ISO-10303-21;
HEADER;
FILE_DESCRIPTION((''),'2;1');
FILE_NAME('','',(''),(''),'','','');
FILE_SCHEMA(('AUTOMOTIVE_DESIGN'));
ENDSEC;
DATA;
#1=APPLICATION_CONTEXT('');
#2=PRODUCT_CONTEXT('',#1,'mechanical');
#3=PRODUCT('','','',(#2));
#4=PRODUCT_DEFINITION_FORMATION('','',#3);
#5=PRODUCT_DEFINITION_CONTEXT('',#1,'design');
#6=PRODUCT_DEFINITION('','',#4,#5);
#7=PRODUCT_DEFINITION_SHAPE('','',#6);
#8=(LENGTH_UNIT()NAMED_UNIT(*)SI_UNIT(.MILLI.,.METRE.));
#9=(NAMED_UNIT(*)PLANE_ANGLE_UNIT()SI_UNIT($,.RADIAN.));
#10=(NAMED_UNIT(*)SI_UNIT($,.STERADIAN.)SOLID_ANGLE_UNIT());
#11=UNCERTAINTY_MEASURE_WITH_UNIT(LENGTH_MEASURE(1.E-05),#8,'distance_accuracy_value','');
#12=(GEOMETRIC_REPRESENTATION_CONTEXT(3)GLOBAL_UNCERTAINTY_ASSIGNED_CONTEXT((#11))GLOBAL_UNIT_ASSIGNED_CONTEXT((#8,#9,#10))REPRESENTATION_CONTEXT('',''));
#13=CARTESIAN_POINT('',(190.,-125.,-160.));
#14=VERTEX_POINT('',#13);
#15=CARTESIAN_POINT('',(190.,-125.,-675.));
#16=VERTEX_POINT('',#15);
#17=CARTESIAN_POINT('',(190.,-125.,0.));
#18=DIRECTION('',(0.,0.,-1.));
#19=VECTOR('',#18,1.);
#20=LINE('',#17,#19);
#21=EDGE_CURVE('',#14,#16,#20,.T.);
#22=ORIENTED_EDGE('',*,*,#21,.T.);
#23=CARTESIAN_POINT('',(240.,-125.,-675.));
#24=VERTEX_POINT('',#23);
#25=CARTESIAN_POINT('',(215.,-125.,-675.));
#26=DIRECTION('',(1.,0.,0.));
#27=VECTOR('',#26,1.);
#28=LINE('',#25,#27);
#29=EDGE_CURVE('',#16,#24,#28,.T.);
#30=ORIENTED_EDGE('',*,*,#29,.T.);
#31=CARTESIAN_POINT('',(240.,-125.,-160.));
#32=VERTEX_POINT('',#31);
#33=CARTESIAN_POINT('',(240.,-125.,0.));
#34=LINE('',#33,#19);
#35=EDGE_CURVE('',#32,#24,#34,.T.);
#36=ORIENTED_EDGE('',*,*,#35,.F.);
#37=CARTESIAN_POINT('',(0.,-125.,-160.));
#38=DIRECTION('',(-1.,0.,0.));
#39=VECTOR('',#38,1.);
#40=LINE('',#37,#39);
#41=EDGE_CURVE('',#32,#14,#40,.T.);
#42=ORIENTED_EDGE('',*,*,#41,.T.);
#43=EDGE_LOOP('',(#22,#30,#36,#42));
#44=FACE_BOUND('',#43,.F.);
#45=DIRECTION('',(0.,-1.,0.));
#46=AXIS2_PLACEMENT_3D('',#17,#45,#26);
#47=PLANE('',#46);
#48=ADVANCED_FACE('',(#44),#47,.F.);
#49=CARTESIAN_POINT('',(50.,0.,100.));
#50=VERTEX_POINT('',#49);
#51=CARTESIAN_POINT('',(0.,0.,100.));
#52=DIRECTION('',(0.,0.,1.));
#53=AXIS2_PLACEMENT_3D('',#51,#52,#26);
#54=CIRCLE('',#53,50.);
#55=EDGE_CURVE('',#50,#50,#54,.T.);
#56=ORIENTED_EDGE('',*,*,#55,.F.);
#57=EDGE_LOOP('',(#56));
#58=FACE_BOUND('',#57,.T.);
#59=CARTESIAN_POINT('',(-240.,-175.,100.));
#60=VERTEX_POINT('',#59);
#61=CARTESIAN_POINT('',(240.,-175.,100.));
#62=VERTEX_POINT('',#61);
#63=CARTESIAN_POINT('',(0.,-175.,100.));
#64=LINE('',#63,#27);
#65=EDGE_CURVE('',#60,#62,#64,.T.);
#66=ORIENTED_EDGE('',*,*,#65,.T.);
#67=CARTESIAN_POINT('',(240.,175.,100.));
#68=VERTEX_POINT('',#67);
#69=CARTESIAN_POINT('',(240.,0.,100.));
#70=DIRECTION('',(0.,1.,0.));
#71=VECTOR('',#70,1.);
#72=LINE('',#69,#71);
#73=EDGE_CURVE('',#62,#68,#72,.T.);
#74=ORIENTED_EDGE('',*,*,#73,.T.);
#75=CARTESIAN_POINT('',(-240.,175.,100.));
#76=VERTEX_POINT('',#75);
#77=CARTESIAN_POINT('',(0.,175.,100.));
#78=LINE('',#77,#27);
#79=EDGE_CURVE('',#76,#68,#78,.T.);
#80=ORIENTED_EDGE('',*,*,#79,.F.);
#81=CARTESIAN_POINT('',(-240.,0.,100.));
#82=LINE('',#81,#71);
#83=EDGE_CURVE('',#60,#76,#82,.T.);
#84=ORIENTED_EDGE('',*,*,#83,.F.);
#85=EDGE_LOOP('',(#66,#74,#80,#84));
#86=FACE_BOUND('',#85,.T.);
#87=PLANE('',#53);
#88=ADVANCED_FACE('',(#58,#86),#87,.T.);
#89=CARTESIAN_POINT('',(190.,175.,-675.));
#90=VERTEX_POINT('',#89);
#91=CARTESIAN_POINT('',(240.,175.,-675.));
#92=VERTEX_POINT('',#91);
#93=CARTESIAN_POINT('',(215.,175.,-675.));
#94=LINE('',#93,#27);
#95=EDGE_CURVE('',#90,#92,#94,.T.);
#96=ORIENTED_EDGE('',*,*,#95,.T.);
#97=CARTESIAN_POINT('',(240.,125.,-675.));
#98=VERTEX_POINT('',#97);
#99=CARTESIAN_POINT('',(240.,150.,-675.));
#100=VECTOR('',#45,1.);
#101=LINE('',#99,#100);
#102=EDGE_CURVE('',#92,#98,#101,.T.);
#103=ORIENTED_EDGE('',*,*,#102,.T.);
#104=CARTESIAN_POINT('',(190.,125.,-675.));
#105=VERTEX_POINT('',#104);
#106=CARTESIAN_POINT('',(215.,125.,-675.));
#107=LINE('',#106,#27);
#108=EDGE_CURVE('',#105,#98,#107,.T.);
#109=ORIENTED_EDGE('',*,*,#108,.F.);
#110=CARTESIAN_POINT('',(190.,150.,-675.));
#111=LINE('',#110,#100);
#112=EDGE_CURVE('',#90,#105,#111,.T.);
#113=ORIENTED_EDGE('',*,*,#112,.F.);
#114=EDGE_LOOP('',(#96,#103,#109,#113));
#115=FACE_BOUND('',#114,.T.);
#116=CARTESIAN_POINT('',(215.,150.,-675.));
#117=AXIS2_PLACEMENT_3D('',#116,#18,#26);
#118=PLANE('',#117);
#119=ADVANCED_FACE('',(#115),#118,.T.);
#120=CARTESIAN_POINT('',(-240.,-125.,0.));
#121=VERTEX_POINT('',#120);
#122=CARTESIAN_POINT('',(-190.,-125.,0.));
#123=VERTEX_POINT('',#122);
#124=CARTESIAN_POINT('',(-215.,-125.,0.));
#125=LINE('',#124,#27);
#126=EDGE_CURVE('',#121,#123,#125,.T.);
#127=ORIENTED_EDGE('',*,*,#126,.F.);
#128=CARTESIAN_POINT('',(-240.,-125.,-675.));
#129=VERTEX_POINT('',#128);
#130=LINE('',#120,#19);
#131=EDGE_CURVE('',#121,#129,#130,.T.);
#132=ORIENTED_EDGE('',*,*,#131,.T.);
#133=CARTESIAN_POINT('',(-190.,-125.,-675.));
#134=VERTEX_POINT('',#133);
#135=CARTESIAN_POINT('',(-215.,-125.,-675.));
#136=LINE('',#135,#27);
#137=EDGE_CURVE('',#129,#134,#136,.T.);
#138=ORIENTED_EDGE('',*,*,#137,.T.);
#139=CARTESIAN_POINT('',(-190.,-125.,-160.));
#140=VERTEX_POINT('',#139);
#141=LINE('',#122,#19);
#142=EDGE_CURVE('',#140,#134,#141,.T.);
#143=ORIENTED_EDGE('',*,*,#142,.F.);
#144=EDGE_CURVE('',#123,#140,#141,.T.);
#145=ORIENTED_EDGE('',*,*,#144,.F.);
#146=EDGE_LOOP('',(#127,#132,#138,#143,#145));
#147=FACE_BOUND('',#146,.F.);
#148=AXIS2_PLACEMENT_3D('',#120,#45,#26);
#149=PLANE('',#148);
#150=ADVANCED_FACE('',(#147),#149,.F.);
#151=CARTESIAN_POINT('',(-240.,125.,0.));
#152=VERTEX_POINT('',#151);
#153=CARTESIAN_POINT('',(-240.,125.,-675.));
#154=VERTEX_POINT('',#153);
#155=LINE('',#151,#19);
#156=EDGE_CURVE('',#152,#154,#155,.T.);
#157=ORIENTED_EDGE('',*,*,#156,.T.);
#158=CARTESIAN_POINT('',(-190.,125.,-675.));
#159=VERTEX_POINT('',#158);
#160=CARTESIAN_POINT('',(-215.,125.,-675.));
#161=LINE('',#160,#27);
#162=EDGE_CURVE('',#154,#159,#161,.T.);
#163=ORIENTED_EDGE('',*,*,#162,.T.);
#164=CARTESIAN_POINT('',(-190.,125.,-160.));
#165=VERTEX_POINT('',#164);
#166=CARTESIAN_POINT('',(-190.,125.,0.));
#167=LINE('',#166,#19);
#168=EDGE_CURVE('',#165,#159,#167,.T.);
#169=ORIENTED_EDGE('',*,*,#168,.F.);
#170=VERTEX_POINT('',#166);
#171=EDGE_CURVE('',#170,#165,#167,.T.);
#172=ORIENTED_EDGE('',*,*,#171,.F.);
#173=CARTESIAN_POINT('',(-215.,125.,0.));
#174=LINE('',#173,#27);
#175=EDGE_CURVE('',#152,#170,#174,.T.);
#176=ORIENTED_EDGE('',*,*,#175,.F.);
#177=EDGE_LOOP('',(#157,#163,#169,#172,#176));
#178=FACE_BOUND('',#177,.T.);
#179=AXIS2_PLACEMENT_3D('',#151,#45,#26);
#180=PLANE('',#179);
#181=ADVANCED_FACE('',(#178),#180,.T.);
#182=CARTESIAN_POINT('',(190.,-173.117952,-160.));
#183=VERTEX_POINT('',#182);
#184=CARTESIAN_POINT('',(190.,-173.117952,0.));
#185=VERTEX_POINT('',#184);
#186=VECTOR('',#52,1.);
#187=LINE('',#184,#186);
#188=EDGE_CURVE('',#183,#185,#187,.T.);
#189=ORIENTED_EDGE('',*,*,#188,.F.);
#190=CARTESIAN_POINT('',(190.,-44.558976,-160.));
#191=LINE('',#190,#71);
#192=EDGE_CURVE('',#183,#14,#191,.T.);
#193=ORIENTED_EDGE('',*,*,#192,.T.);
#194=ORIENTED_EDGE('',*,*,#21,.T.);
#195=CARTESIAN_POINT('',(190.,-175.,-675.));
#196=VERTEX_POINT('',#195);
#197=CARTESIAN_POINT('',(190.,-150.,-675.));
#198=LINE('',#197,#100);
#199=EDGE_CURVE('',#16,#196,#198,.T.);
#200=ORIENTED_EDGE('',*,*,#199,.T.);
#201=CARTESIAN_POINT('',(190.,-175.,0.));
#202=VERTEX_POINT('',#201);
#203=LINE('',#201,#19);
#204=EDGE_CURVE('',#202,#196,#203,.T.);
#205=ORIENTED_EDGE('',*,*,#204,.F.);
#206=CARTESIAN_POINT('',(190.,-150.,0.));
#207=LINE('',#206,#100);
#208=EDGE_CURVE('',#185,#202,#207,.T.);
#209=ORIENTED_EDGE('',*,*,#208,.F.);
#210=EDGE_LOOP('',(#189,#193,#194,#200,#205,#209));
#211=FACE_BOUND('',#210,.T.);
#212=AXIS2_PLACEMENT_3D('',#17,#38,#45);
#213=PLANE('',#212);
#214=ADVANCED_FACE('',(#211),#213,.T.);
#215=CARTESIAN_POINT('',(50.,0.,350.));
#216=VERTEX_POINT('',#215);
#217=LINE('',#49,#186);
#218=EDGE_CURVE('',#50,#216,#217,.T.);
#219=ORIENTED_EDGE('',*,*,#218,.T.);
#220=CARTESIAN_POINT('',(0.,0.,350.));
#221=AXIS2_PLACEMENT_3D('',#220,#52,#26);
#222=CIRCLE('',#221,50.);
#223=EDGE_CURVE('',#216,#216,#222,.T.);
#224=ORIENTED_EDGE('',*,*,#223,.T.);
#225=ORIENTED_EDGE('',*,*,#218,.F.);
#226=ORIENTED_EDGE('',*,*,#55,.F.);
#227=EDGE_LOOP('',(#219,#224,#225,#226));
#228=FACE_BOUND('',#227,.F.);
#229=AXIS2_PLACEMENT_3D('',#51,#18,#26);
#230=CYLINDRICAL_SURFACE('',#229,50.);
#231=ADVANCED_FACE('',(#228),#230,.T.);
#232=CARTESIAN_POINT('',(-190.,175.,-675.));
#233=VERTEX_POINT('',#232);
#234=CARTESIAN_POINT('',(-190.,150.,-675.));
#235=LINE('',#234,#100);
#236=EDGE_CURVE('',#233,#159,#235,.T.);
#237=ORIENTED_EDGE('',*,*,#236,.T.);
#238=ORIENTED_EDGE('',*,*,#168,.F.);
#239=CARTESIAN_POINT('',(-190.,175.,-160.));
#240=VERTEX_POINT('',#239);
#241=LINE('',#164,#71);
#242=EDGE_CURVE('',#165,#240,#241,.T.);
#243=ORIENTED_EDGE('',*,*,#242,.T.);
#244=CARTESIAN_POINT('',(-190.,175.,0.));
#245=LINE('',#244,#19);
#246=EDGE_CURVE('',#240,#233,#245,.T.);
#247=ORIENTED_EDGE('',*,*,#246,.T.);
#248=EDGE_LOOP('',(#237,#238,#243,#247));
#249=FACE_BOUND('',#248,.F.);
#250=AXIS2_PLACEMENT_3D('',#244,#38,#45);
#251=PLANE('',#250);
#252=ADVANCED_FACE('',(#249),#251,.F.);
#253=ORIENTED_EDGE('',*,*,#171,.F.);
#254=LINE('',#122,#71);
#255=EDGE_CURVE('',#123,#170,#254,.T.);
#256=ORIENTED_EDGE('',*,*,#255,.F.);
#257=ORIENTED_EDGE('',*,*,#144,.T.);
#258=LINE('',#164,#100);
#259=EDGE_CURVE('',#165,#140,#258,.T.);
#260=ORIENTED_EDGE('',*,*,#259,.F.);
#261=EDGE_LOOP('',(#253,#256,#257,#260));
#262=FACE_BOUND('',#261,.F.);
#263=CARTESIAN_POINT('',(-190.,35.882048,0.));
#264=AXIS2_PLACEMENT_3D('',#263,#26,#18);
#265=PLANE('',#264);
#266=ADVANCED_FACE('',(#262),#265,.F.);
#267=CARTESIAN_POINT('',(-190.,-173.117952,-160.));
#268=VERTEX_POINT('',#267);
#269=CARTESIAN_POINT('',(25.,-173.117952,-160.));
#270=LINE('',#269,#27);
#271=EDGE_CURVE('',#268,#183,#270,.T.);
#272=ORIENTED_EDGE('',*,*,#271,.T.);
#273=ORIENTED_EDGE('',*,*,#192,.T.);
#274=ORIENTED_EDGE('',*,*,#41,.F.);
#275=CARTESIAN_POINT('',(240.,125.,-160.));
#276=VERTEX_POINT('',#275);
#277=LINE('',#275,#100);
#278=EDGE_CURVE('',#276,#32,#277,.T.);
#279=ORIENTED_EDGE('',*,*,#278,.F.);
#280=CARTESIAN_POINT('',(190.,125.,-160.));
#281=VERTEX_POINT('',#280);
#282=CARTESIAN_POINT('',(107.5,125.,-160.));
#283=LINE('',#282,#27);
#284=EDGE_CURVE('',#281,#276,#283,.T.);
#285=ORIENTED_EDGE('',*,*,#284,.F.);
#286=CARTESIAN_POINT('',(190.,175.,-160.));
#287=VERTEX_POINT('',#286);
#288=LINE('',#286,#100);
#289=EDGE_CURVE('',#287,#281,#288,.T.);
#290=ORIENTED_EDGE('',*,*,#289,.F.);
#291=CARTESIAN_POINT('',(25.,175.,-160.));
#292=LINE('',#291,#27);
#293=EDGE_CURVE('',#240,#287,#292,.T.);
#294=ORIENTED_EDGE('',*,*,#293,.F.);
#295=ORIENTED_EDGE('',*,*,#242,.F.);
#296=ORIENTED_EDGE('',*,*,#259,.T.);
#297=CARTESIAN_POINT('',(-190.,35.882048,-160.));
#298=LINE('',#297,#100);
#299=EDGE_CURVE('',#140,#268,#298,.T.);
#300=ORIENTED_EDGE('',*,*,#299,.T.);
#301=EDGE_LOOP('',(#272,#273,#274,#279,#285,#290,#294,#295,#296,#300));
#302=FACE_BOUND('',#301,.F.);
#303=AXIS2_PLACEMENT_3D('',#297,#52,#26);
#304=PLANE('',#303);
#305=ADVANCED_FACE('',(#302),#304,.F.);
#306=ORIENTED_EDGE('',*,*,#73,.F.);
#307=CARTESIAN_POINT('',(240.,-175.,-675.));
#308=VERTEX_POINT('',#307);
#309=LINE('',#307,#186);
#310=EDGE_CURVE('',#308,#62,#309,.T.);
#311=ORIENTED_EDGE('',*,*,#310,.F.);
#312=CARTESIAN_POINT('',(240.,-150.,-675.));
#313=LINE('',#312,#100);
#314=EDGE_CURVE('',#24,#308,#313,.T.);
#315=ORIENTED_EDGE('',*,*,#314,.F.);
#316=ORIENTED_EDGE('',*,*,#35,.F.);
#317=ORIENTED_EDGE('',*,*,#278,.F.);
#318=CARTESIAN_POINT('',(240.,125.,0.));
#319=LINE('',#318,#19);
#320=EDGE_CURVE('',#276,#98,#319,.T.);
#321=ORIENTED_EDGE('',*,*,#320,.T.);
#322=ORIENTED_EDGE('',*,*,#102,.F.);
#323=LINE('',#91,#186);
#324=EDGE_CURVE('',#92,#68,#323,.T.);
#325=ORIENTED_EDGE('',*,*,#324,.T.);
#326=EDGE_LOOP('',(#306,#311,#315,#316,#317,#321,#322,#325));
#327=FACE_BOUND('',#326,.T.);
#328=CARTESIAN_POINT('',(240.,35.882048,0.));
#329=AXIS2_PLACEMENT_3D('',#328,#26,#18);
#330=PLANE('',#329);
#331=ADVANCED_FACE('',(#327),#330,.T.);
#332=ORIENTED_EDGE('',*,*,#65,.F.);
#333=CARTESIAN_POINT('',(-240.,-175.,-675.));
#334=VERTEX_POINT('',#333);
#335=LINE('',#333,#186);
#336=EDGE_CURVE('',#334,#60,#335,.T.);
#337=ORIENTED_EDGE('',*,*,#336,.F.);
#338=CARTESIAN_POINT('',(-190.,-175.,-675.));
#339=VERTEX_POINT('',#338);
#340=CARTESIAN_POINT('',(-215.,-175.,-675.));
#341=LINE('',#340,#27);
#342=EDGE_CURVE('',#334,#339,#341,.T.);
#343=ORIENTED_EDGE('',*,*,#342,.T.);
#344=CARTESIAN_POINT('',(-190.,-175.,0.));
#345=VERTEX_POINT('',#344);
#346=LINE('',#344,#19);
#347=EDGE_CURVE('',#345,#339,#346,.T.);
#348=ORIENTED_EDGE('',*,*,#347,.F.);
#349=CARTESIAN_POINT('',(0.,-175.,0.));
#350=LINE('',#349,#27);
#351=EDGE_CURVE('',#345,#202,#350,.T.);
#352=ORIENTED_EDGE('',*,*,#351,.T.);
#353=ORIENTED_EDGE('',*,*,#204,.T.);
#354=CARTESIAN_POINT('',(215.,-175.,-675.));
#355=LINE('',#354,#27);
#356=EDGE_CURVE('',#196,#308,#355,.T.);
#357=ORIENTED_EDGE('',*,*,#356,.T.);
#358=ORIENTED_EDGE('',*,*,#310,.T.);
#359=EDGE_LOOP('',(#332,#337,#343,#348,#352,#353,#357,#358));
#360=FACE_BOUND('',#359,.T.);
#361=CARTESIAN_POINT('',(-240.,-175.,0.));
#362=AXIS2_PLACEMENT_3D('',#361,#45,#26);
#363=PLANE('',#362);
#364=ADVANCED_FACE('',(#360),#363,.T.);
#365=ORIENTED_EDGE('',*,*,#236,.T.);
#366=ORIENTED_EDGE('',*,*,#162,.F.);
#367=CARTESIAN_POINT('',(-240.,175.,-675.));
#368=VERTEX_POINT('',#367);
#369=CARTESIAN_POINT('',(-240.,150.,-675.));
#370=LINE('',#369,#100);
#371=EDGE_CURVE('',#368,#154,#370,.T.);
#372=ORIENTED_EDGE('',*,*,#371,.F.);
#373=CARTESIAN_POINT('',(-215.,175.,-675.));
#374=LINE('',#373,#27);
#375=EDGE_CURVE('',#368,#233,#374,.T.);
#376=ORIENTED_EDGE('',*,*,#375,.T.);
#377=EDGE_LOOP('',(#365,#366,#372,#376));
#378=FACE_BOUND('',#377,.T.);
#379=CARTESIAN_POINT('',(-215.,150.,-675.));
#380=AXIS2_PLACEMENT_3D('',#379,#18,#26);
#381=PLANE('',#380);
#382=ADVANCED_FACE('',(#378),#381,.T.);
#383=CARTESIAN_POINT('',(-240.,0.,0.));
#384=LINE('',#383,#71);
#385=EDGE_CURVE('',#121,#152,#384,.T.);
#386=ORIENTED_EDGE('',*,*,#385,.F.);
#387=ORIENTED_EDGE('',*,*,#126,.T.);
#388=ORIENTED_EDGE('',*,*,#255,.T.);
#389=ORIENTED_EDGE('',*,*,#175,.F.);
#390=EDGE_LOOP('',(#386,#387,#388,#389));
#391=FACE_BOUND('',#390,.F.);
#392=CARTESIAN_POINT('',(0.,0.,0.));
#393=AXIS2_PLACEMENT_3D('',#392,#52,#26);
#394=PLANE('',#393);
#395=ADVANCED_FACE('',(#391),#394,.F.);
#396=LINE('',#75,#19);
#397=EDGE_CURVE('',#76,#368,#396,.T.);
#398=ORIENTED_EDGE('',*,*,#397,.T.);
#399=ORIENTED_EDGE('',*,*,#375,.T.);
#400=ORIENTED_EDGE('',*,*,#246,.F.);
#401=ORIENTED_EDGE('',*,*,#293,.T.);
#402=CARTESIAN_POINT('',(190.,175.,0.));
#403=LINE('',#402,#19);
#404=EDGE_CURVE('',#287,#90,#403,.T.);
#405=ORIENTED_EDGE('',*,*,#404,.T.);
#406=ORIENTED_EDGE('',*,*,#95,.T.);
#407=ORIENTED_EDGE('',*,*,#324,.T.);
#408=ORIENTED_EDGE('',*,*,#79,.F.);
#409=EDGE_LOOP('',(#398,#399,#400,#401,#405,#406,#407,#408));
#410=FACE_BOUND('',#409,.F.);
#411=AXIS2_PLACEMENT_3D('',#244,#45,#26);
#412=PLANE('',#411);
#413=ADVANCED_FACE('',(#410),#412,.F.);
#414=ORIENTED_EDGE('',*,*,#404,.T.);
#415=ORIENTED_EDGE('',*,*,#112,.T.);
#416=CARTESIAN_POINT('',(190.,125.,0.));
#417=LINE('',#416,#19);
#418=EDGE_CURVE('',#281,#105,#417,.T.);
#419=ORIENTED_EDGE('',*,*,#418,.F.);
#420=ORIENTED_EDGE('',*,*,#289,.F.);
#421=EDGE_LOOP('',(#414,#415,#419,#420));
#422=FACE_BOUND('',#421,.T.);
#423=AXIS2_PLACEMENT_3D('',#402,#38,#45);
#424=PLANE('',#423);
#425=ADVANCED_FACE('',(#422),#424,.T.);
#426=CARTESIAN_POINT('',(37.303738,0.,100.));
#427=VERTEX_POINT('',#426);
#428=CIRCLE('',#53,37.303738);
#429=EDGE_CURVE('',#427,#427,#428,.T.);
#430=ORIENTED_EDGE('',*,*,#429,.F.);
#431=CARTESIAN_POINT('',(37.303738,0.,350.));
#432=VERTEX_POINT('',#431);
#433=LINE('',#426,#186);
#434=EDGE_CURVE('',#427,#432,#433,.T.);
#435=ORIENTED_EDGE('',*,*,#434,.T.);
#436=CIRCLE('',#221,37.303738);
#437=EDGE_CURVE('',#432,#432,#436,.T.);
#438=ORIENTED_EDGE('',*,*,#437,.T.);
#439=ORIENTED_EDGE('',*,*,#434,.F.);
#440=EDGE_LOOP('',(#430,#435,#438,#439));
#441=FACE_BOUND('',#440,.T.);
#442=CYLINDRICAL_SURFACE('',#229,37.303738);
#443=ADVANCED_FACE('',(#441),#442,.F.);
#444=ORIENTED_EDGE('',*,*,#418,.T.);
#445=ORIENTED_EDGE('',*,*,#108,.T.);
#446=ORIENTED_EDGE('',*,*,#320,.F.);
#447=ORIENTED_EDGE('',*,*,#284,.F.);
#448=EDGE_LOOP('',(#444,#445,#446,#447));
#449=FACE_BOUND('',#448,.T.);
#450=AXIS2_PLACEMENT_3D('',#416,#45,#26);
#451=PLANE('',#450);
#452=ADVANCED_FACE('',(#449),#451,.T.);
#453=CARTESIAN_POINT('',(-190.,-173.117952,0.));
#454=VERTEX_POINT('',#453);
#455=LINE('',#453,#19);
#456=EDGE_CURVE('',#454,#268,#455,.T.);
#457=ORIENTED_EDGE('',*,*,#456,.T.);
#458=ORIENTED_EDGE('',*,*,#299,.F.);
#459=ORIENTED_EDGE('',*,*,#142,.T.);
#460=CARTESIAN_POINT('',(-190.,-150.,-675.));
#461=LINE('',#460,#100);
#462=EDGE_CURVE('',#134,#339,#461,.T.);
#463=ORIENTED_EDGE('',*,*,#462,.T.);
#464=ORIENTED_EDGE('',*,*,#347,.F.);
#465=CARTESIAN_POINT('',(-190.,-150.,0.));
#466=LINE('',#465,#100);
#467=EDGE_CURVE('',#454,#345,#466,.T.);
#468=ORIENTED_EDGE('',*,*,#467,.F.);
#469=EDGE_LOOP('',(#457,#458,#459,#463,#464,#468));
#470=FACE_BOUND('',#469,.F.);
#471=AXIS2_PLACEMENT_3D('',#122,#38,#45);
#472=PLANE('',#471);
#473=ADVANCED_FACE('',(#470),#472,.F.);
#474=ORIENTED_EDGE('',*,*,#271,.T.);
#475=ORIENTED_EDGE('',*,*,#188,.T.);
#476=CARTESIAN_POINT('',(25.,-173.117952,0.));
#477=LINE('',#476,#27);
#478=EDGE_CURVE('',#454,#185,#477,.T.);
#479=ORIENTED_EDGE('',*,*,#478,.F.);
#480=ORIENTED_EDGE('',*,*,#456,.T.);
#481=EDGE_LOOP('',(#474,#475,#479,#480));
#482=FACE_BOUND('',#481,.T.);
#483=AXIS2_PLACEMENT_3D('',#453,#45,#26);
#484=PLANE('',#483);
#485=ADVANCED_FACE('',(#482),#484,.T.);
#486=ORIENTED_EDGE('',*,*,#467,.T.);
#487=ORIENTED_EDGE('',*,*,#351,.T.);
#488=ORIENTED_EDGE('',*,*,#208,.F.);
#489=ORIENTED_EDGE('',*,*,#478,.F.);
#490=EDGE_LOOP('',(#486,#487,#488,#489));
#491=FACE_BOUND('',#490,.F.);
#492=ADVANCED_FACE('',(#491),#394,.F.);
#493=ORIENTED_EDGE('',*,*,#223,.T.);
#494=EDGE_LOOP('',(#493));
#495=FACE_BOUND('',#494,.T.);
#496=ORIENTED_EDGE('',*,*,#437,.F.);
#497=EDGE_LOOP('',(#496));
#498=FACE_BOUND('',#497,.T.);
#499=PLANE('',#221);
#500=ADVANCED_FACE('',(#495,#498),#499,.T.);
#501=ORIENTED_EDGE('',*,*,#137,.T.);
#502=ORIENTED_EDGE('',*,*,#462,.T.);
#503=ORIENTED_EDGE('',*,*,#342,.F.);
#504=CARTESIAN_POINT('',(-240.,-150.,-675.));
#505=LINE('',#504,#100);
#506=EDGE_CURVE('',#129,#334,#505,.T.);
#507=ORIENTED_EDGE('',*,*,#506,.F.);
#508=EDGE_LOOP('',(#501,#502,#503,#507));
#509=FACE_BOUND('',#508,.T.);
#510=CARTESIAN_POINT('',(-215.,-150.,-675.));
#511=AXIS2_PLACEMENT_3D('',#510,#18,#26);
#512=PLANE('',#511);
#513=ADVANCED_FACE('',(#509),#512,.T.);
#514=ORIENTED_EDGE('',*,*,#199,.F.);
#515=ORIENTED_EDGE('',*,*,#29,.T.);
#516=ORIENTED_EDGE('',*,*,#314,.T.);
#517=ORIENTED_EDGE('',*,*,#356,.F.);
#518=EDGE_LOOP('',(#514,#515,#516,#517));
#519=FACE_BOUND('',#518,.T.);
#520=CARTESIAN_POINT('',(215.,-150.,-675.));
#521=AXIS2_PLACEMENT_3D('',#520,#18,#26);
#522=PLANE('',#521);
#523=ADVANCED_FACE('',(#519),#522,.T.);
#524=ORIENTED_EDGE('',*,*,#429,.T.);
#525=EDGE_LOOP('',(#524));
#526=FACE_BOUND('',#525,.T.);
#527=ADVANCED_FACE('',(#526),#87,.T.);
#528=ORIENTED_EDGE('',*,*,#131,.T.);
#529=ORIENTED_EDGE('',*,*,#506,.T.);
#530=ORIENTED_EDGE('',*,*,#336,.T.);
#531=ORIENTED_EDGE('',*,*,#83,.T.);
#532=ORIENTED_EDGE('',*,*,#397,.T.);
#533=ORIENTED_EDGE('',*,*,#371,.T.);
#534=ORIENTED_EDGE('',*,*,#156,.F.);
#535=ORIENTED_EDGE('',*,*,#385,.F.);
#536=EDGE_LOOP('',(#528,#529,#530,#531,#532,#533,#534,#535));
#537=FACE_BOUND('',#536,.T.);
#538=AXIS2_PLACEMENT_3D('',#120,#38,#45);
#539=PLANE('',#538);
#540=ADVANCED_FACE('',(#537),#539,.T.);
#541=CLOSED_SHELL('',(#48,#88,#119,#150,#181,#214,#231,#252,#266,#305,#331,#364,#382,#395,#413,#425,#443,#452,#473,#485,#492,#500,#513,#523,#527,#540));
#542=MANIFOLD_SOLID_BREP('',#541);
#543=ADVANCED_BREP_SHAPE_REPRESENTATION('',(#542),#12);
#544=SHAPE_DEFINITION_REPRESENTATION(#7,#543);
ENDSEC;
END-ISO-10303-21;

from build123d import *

# Parameters (mm, degrees)
F0_W      = 480
F0_H      = 350
F1_DEPTH  = 100
F2_W      = 50
F2_H      = 50
F3_DEPTH  = 675
F4_W      = 50
F4_H      = 50
F5_DEPTH  = 675
F6_W      = 50
F6_H      = 50
F7_DEPTH  = 675
F8_W      = 50
F8_H      = 50
F9_DEPTH  = 675
F10_R     = 50
F10_R_2   = 37.3037381585
F11_DEPTH = 250
F14_W     = 430
F14_H     = 139.1179516912
F15_DEPTH = 160
F16_DEPTH = 209
F17_W     = 49.8938559854
F17_H     = 160
F18_DEPTH = 430


# Not quite as in the source:
# - a feature names something its author has since deleted; it is built from what else it names
# - the program builds the solid bodies; features that only make, move or delete a surface that nothing else refers to are left out


with BuildPart() as f1:
    # F0 (on Top) → F1 (new body)
    with BuildSketch(Plane.XY):
        Rectangle(F0_W, F0_H)
    extrude(amount=F1_DEPTH)

    # F2 (on face) → F3 (join)
    with BuildSketch(Plane(origin=(0, 0, 0), x_dir=(1, 0, 0), z_dir=(0, 0, -1))):
        with Locations((215, 150)):
            Rectangle(F2_W, F2_H)
    extrude(amount=F3_DEPTH)

    # F4 (on face) → F5 (join)
    with BuildSketch(Plane(origin=(0, 0, 0), x_dir=(1, 0, 0), z_dir=(0, 0, -1))):
        with Locations((215, -150)):
            Rectangle(F4_W, F4_H)
    extrude(amount=F5_DEPTH)

    # F6 (on face) → F7 (join)
    with BuildSketch(Plane(origin=(0, 0, 0), x_dir=(1, 0, 0), z_dir=(0, 0, -1))):
        with Locations((-215, -150)):
            Rectangle(F6_W, F6_H)
    extrude(amount=F7_DEPTH)

    # F8 (on face) → F9 (join)
    with BuildSketch(Plane(origin=(0, 0, 0), x_dir=(1, 0, 0), z_dir=(0, 0, -1))):
        with Locations((-215, 150)):
            Rectangle(F8_W, F8_H)
    extrude(amount=F9_DEPTH)

    # F10 (on face) → F11 (join)
    with BuildSketch(Plane.XY.offset(100)):
        Circle(F10_R)
        Circle(F10_R_2, mode=Mode.SUBTRACT)
    extrude(amount=F11_DEPTH)

    # F14 (on face) → F15 (join)
    with BuildSketch(Plane(origin=(0, 0, 0), x_dir=(1, 0, 0), z_dir=(0, 0, -1))):
        with Locations((25, -105.4410241544)):
            Rectangle(F14_W, F14_H)
    extrude(amount=F15_DEPTH)

    # F16 (add): a face of the model
    f16_faces = [f1.faces().sort_by_distance(p)[0] for p in [
        (25, 35.8820483088, -80),
    ]]
    extrude(f16_faces, amount=F16_DEPTH)

    # F17 (on face) → F18 (join)
    with BuildSketch(Plane(origin=(-190, 0, 0), x_dir=(0, -1, 0), z_dir=(-1, 0, 0))):
        with Locations((-149.9469279927, -80)):
            Rectangle(F17_W, F17_H)
    extrude(amount=-F18_DEPTH)


solid = f1.part
